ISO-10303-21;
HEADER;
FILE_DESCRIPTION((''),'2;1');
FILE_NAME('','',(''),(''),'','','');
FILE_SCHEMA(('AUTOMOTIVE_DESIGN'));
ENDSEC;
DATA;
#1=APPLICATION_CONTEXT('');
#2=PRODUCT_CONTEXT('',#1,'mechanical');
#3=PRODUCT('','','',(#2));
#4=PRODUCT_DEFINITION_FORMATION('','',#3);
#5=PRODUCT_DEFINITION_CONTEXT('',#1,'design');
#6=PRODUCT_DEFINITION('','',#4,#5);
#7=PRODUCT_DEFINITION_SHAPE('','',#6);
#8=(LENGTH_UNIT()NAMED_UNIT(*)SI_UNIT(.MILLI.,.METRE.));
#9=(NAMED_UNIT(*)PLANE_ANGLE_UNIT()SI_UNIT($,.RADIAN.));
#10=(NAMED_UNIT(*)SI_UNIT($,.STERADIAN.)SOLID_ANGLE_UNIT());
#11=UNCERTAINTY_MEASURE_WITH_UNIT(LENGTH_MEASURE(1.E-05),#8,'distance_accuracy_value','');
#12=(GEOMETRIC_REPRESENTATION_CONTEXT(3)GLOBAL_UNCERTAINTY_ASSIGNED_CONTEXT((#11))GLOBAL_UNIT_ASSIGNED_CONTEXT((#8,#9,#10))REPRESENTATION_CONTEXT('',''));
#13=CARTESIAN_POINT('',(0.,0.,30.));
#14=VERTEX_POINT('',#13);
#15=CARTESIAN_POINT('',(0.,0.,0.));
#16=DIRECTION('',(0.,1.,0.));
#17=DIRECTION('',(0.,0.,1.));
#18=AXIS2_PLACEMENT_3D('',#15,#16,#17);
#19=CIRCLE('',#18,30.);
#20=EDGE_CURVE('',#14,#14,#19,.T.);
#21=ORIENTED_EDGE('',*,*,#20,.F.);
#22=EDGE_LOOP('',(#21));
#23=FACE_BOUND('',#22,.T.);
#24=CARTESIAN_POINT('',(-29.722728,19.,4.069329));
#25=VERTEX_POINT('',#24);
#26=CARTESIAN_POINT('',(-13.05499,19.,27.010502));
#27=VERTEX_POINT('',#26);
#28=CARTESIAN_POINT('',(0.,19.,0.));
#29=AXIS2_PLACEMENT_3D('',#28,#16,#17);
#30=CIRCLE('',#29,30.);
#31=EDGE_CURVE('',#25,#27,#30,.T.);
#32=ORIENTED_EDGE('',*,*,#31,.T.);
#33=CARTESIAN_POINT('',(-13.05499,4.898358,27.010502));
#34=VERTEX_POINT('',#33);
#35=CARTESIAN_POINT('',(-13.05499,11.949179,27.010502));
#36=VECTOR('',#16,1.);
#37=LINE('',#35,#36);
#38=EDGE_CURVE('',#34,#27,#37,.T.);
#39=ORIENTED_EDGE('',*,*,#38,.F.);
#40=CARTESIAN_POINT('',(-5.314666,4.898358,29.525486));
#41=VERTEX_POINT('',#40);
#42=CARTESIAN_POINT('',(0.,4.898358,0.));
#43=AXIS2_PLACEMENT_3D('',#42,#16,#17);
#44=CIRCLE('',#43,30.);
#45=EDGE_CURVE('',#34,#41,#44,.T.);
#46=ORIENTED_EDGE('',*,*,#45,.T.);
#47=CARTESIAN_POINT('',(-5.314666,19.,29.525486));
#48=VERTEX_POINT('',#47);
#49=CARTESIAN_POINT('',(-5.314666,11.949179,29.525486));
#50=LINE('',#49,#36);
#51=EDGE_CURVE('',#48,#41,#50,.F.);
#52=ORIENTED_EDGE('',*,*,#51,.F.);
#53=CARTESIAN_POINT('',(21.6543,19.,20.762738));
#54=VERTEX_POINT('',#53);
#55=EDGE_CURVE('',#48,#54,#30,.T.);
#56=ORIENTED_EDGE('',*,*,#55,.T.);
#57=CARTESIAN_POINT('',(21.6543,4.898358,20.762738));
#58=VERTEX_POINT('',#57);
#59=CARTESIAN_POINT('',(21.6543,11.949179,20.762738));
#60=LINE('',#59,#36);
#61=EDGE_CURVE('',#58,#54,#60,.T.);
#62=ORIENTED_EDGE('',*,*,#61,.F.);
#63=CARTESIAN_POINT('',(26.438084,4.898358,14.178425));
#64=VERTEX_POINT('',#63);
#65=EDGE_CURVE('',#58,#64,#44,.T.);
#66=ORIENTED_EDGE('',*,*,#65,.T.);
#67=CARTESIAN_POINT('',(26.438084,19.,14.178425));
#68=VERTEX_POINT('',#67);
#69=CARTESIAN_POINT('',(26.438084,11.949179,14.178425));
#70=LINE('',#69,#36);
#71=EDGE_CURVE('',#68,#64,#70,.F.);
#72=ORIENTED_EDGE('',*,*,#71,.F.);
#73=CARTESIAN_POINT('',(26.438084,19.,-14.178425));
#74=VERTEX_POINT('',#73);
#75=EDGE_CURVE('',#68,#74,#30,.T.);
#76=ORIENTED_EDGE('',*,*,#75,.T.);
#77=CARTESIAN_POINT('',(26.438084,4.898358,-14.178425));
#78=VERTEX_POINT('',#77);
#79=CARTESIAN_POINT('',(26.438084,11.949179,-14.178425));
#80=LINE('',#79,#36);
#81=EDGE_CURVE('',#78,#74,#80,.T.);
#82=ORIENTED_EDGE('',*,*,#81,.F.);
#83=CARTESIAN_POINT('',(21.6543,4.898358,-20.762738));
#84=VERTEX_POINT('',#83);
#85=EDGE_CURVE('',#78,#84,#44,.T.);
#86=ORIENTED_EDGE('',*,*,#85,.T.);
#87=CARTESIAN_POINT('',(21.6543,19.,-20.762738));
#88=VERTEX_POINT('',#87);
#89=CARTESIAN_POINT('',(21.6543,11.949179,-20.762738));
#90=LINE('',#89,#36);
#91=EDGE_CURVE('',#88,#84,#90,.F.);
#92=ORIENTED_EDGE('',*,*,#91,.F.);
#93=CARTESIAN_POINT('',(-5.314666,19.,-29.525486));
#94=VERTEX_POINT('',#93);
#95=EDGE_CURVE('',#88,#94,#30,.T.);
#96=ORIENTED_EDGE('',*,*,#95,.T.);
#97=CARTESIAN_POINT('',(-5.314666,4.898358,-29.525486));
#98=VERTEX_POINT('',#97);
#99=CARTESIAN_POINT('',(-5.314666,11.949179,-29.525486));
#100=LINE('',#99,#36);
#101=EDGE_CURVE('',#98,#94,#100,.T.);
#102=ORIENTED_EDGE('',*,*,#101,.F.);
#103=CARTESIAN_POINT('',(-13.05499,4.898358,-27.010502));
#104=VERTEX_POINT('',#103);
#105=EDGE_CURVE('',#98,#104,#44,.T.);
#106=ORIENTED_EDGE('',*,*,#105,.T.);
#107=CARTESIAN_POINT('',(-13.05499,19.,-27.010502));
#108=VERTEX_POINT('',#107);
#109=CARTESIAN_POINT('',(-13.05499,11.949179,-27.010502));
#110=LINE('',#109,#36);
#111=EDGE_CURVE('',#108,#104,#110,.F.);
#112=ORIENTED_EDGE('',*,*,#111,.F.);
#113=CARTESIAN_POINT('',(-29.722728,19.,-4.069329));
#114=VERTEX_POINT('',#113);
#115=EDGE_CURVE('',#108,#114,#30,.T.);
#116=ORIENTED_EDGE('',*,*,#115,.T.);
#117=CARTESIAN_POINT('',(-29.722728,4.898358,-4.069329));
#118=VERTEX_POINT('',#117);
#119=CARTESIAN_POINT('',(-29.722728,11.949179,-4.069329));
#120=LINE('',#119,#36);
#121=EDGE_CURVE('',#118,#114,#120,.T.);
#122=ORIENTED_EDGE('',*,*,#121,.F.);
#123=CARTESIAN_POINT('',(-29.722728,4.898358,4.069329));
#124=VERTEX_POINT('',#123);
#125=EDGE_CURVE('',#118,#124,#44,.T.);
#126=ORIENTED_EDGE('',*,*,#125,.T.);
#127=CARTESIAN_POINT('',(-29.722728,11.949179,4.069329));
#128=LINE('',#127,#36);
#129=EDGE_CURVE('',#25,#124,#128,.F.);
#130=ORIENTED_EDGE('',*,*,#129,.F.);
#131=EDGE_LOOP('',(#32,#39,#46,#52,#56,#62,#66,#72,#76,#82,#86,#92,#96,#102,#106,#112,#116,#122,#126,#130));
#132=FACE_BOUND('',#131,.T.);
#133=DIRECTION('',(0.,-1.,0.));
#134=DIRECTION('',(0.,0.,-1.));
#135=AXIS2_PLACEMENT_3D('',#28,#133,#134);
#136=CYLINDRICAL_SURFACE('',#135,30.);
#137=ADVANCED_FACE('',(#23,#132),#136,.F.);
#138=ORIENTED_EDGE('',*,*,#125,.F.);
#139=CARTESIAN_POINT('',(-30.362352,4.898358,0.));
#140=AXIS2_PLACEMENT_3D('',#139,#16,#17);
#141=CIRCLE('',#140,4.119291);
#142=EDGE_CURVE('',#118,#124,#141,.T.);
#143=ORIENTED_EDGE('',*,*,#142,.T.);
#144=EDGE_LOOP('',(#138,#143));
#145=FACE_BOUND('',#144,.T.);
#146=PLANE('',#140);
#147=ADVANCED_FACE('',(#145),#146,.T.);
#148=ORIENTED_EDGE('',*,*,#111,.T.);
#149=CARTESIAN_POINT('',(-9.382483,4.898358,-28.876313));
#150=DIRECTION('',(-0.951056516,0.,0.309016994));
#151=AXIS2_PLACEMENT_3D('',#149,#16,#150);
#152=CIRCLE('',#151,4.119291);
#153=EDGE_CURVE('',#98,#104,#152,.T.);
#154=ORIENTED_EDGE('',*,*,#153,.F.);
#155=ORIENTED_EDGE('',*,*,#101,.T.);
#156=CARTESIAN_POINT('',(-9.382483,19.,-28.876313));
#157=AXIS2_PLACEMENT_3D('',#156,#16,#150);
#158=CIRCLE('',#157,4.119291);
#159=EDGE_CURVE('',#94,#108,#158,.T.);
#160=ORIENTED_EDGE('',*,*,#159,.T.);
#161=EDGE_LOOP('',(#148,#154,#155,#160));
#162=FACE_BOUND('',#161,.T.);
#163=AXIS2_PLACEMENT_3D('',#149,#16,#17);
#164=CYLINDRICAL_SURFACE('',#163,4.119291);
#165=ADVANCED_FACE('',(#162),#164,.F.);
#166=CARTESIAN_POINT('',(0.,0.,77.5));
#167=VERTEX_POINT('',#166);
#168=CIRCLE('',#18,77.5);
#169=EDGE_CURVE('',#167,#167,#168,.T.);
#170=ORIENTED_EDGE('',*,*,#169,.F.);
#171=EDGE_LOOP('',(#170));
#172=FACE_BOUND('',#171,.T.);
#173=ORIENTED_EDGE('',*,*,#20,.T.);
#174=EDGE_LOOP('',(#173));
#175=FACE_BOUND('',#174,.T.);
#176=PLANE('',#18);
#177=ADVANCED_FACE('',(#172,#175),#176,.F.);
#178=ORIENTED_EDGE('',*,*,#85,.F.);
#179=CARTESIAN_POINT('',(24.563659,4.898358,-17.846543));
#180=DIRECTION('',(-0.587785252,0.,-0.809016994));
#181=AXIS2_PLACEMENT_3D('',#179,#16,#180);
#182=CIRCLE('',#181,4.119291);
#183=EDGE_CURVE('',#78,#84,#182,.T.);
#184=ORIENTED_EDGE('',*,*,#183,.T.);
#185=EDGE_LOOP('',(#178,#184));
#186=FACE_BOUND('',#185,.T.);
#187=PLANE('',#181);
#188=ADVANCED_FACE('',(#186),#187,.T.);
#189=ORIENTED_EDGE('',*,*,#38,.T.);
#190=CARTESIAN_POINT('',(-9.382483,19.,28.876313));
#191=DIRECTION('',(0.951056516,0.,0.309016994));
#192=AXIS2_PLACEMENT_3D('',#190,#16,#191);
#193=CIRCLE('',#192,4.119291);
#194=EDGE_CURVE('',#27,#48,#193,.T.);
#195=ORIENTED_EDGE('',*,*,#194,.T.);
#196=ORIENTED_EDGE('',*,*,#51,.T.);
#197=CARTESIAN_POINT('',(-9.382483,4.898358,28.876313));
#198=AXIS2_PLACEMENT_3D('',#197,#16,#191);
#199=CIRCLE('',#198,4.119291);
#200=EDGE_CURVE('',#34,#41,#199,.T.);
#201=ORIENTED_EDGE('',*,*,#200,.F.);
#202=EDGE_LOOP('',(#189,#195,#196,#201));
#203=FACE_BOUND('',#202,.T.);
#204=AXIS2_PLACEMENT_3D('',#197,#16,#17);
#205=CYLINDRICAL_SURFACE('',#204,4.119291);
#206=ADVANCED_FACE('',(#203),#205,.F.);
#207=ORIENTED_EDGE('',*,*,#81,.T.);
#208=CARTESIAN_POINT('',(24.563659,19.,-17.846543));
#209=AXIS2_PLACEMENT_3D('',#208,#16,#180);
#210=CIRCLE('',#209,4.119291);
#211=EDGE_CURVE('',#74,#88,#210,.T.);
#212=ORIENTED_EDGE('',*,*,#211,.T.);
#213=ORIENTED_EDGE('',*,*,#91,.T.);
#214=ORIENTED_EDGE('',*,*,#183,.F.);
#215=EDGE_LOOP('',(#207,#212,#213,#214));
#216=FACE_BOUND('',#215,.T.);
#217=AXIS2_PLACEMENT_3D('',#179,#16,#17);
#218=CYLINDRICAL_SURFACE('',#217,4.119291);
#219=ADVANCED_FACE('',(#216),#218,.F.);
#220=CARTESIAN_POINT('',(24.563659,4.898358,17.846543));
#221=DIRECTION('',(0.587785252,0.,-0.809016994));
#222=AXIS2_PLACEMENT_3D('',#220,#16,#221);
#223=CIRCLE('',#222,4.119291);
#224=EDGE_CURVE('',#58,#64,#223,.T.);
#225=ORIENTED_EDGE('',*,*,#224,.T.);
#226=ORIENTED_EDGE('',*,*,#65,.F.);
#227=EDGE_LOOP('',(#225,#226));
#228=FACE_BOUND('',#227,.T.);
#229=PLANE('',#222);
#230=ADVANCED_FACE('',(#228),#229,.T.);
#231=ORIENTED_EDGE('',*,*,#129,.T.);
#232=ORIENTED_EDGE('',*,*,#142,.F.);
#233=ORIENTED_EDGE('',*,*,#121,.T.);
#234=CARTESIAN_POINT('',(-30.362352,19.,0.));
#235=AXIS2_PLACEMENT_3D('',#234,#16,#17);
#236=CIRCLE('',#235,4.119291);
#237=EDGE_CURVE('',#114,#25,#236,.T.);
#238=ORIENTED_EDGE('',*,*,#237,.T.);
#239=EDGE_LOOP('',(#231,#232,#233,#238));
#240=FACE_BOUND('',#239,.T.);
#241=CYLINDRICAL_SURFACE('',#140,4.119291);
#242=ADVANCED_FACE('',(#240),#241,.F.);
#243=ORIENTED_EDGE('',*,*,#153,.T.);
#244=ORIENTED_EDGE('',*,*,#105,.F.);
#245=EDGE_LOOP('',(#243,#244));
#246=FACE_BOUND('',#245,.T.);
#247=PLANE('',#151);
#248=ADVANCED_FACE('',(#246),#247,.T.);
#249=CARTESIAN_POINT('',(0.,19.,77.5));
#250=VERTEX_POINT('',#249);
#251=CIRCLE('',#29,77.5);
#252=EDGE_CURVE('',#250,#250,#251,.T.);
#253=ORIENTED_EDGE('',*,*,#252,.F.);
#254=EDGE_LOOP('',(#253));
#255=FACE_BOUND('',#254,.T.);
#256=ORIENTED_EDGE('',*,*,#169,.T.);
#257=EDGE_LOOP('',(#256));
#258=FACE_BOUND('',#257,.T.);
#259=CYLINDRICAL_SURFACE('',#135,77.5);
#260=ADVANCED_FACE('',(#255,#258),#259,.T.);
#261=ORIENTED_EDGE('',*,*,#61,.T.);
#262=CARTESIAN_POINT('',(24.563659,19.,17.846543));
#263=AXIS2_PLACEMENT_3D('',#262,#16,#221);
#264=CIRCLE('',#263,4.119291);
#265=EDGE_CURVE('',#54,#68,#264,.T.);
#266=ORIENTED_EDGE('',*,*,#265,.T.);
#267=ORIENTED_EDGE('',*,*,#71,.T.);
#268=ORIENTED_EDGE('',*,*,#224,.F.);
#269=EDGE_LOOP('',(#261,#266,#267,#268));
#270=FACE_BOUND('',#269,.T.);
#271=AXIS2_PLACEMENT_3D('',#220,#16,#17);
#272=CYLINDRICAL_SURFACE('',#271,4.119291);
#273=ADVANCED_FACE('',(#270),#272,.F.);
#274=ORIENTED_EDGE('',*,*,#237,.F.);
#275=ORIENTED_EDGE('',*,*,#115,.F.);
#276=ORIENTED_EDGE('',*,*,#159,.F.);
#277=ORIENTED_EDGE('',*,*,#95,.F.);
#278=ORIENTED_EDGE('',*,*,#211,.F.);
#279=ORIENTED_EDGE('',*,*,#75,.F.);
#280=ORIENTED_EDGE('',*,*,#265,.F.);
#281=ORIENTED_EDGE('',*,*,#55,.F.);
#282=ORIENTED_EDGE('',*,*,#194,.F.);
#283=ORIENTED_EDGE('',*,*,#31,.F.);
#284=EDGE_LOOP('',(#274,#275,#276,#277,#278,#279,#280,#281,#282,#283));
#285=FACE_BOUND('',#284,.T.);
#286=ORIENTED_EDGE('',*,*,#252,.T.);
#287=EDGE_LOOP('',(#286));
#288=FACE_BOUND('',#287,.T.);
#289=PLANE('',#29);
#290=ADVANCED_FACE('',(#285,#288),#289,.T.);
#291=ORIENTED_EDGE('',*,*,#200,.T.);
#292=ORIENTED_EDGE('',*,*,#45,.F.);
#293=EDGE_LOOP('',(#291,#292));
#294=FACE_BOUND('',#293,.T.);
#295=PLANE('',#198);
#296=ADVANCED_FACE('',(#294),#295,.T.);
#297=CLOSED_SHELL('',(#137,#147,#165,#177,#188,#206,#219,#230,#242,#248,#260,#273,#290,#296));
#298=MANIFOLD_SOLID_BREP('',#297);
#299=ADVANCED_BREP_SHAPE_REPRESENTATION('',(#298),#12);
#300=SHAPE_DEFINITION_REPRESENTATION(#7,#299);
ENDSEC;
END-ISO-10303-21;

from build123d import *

# Parameters (mm, degrees)
SKETCH1_R           = 77.5
BOSS_EXTRUDE1_DEPTH = 19
SKETCH2_R           = 30
CUT_EXTRUDE1_DEPTH  = 112.236235103
SKETCH3_R           = 4.119291262
CUT_EXTRUDE2_DEPTH  = 14.101641556
CIRPATTERN1_COUNT   = 5


with BuildPart() as part:
    # Sketch1 → Boss-Extrude1 (new body)
    with BuildSketch(Plane(origin=(0, 0, 0), x_dir=(1, 0, 0), z_dir=(0, 1, 0))):
        Circle(SKETCH1_R)
    extrude(amount=BOSS_EXTRUDE1_DEPTH)

    # Sketch2 → Cut-Extrude1 (cut, through all)
    with BuildSketch(Plane(origin=(0, 0, 0), x_dir=(1, 0, 0), z_dir=(0, 1, 0))):
        Circle(SKETCH2_R)
    extrude(amount=CUT_EXTRUDE1_DEPTH, mode=Mode.SUBTRACT)

    # Sketch3 → Cut-Extrude2 (cut)
    with BuildSketch(Plane(origin=(0, 19, 0), x_dir=(1, 0, 0), z_dir=(0, 1, 0))):
        with Locations((-30.3623525, 0)):
            Circle(SKETCH3_R)
    cut_extrude2 = extrude(amount=-CUT_EXTRUDE2_DEPTH, mode=Mode.SUBTRACT)

    # CirPattern1: Cut-Extrude2 ×5 about axis
    cirpattern1_axis = Axis((0, 0, 0), (0, 1, 0))
    for i in range(1, CIRPATTERN1_COUNT):
        add(cut_extrude2.rotate(cirpattern1_axis, i * 360 / CIRPATTERN1_COUNT), mode=Mode.SUBTRACT)


solid = part.part
